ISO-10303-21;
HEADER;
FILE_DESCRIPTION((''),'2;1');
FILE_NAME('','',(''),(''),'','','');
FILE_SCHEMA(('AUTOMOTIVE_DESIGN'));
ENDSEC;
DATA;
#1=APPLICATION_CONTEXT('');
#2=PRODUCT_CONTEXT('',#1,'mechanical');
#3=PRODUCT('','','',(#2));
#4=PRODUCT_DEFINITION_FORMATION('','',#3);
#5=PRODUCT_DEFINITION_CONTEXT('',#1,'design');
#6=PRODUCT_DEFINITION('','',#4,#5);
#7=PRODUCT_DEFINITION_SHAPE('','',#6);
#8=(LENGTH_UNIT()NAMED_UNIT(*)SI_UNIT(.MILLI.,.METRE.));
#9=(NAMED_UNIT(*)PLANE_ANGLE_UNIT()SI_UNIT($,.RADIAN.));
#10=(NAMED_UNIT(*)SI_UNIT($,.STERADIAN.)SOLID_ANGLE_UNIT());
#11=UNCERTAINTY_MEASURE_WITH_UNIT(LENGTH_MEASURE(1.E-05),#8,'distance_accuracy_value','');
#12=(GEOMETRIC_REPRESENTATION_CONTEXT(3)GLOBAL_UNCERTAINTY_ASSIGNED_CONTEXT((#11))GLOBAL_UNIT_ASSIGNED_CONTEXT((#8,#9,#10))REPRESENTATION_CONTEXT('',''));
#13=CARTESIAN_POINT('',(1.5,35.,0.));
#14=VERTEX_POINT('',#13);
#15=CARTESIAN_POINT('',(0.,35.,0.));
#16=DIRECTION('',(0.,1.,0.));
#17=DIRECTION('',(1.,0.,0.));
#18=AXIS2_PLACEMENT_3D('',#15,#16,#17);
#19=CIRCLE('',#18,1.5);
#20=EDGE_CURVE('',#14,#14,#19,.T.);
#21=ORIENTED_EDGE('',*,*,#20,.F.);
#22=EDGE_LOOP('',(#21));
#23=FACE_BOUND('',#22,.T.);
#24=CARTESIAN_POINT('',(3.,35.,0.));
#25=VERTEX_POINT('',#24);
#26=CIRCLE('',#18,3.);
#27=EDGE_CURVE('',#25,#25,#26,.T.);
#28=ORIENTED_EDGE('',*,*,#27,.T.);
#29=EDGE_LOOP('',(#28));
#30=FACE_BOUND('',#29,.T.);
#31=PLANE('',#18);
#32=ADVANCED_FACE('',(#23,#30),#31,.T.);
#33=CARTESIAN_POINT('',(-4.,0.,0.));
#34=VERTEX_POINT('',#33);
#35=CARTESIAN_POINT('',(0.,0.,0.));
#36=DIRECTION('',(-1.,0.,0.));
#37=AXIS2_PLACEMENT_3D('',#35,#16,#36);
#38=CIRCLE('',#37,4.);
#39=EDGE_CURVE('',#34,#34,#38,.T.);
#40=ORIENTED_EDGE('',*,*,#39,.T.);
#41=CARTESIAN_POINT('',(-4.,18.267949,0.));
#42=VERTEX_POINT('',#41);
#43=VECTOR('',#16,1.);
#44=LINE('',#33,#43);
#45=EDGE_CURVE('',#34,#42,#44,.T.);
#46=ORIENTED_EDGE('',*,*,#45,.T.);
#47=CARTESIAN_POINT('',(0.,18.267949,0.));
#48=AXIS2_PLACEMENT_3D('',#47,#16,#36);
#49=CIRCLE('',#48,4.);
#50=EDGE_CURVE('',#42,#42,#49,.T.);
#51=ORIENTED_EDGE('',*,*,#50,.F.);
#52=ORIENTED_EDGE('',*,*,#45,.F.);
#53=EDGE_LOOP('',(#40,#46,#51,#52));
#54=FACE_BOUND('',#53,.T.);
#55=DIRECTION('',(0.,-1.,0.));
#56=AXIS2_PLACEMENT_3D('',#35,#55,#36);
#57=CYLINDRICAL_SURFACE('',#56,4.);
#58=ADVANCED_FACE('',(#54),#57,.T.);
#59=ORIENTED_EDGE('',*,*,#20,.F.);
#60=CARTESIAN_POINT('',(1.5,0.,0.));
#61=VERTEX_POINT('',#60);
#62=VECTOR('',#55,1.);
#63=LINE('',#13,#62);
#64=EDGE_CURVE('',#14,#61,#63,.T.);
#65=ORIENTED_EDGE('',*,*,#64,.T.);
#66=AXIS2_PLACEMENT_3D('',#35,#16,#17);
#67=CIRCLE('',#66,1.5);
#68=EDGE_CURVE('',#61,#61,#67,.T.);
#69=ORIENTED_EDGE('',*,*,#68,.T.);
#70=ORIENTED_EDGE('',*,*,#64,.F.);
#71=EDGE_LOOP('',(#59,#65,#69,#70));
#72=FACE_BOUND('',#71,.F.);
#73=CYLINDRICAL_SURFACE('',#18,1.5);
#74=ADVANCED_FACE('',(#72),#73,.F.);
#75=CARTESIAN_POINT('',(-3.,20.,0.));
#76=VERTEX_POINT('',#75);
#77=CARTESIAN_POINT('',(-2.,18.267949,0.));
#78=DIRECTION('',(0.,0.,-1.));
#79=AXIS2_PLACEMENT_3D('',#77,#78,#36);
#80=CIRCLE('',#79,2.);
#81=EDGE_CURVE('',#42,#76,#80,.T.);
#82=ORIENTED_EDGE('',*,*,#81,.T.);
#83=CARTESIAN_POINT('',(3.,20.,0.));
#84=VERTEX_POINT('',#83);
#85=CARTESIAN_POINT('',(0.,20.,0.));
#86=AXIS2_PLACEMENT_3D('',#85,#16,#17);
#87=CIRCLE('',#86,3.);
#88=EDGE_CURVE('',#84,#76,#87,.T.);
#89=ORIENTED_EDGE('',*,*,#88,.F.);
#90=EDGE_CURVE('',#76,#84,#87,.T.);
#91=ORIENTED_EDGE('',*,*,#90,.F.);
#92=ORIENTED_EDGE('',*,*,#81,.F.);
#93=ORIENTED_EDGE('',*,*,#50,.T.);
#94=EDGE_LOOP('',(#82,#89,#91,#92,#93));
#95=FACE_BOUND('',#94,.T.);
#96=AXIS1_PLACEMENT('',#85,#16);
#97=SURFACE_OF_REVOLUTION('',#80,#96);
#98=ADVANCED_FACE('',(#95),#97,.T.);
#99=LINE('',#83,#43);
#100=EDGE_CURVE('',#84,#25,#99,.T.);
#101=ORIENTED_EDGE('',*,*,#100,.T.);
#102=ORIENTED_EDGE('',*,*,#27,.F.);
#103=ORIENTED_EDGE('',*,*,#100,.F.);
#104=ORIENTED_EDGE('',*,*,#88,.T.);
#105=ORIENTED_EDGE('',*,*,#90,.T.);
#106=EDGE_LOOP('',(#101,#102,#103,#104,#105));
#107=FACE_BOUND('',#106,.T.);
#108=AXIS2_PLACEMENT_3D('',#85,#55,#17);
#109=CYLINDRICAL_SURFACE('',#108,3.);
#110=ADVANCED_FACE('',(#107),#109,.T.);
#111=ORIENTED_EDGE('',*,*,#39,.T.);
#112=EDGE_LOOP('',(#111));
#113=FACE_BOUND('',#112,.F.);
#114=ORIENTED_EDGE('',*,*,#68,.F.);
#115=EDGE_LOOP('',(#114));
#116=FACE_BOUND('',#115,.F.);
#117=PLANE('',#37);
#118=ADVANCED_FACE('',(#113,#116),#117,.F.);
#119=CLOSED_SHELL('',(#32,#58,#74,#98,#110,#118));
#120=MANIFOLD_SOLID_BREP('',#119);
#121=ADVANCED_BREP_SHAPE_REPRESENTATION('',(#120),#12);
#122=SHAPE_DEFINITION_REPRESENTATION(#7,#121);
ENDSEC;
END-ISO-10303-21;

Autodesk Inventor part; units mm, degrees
ref_plane "YZ Plane" through (0, 0, 0) normal (1, 0, 0) x (0, 1, 0)
ref_plane "XZ Plane" through (0, 0, 0) normal (0, 1, 0) x (-1, 0, 0)
ref_plane "XY Plane" through (0, 0, 0) normal (0, 0, 1) x (1, 0, 0)
sketch "Sketch1" plane through (0, 0, 0) normal (0, 1, 0) x (-1, 0, 0)
  circle A0 centre (0, 0) radius 4
  dimension "d0" = 8
extrude "Extrusion1" add sketch "Sketch1" along normal blind 20
sketch "Sketch2" plane through (0, 20, 0) normal (0, 1, 0) x (1, 0, 0)
  circle A0 centre (0, 0) radius 3
  dimension "d3" = 6
extrude "Extrusion2" add sketch "Sketch2" along normal blind 15
fillet "Fillet1" radius 2 1 edges at (4, 20, 0)
sketch "Sketch3" plane through (0, 35, 0) normal (0, 1, 0) x (1, 0, 0)
  circle A0 centre (0, 0) radius 1.5
  dimension "d7" = 3
extrude "Extrusion3" cut sketch "Sketch3" against normal blind 35
